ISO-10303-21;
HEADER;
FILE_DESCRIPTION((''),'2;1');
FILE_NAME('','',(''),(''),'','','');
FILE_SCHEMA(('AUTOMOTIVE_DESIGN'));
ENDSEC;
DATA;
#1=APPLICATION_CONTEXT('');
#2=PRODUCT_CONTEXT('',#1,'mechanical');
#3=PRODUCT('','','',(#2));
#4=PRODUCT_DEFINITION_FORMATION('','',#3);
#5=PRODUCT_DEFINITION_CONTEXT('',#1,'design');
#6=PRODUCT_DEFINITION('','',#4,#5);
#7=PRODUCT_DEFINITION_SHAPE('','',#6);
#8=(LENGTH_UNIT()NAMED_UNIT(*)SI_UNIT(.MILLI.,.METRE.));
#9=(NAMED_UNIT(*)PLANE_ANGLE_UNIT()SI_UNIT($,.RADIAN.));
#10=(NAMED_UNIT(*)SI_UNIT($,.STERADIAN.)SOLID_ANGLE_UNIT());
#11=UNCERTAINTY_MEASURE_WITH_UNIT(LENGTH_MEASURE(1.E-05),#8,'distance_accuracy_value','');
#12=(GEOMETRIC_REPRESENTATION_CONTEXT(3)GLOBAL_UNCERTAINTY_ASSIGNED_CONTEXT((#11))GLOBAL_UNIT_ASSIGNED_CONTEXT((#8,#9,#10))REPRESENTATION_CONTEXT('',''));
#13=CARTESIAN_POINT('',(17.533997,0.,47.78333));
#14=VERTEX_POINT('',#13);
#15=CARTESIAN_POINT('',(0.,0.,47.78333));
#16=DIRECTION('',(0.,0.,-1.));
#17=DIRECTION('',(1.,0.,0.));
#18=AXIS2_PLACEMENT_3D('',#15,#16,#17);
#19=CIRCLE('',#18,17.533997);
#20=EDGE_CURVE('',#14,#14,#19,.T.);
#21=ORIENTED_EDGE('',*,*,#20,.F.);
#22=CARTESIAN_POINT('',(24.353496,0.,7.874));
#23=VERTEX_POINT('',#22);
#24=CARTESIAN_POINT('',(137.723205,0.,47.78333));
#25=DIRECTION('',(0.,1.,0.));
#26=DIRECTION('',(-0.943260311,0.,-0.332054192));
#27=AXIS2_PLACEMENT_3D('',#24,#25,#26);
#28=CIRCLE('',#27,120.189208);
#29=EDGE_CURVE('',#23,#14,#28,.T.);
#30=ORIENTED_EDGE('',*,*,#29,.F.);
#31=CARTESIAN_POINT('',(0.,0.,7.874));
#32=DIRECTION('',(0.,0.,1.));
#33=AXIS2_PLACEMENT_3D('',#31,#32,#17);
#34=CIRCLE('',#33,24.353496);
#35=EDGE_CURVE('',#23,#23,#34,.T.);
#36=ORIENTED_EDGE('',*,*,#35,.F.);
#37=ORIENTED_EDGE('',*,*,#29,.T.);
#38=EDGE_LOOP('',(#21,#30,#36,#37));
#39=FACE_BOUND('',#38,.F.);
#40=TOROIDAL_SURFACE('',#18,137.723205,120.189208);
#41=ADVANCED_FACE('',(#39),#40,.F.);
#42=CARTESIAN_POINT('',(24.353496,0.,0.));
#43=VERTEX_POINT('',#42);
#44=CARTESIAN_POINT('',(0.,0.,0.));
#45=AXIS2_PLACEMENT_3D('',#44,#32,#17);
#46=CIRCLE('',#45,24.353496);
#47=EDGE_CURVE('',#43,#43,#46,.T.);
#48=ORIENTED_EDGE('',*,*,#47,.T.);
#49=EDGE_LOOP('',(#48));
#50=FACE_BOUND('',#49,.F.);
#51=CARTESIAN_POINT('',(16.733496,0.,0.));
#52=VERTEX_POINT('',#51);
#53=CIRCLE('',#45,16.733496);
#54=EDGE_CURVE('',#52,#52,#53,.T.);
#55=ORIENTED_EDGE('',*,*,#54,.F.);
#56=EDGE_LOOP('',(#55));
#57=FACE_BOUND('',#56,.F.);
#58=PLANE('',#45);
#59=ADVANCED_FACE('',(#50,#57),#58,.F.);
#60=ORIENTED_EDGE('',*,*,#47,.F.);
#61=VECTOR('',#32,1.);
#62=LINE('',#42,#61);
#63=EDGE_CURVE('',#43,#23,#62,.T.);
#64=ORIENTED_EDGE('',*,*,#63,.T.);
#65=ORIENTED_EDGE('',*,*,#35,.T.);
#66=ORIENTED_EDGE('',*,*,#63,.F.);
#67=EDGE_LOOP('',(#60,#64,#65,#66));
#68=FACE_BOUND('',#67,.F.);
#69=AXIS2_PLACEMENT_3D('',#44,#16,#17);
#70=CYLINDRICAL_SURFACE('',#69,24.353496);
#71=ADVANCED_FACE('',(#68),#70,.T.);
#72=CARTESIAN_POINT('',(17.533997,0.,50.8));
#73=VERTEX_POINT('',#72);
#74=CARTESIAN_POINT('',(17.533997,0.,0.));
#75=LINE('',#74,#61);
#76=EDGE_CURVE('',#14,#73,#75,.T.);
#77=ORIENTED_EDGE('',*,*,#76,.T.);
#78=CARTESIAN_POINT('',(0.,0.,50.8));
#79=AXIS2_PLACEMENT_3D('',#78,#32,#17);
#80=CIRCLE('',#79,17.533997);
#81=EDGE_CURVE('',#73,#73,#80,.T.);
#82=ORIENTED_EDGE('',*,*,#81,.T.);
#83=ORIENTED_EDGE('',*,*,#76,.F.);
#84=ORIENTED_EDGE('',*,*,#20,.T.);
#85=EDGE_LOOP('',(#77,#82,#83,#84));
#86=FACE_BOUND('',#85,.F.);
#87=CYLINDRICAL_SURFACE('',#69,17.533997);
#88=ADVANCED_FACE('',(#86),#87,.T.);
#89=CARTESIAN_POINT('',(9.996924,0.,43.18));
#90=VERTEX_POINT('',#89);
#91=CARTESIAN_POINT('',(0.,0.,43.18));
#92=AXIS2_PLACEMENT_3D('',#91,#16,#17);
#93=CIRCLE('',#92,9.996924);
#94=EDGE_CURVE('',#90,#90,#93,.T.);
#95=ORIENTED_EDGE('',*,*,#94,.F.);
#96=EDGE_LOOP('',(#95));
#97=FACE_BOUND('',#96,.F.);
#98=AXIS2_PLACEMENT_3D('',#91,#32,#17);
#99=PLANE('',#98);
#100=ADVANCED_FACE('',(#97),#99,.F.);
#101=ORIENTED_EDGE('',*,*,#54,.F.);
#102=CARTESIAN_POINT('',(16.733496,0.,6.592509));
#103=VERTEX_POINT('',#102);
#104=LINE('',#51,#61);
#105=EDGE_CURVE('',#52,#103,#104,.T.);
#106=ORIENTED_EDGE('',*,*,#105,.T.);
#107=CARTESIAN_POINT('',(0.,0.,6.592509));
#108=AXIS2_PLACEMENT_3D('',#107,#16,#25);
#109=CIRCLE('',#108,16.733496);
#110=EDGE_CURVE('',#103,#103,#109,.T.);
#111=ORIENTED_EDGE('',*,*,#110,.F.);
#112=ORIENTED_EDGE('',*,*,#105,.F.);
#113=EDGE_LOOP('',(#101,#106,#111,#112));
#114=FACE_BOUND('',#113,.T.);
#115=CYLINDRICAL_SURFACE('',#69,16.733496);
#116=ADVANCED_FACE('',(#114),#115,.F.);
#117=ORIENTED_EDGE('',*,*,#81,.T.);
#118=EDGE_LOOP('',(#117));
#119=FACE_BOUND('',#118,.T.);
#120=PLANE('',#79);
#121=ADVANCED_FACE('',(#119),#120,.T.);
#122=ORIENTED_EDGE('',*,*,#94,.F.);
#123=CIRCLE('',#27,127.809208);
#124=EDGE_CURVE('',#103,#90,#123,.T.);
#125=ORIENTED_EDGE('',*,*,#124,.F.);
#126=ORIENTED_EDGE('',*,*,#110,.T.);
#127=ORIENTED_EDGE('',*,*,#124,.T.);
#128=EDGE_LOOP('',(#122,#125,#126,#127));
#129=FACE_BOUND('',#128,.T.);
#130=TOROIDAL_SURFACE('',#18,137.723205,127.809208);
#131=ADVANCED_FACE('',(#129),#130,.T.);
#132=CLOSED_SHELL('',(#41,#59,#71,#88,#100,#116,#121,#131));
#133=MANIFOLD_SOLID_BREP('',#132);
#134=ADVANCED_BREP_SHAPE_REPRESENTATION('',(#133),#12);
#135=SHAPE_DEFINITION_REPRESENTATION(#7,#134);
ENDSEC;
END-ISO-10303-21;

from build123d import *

# Parameters (mm, degrees)
F0_R     = 17.5339973563
F1_DEPTH = 50.8
F2_R     = 24.353495683
F3_DEPTH = 7.874
F5_T     = -7.62


# Not quite as in the source:
# - a fillet or chamfer that OpenCascade refuses, or shapes differently, is made with other operations: its cross-section is extruded or revolved along the edge and cut away or added


with BuildPart() as f1:
    # F0 (on Top) → F1 (new body)
    with BuildSketch(Plane.XY):
        Circle(F0_R)
    extrude(amount=F1_DEPTH)

    # F2 (on Top) → F3 (join)
    with BuildSketch(Plane.XY):
        Circle(F2_R)
    extrude(amount=F3_DEPTH)

    # F4: fillet of radius 120.1892079892 on 1 edges, made by hand

    # F4_s1 → F4_t2 (revolve)
    with BuildSketch(Plane.XZ):
        with BuildLine():
            ThreePointArc((24.353495683, 7.874), (19.2511383183, 27.5394411034), (17.5339973563, 47.7833303391))
            Line((17.5339973563, 47.7833303391), (17.5339973563, 7.874))
            Line((17.5339973563, 7.874), (24.353495683, 7.874))
        make_face()
    revolve(axis=Axis((0, 0, 7.874), (0, 0, -1)))

    # F5
    f5_openings = [f1.faces().sort_by_distance(p)[0] for p in [
        (0, 0, 0),
    ]]
    offset(amount=F5_T, openings=f5_openings)


solid = f1.part
